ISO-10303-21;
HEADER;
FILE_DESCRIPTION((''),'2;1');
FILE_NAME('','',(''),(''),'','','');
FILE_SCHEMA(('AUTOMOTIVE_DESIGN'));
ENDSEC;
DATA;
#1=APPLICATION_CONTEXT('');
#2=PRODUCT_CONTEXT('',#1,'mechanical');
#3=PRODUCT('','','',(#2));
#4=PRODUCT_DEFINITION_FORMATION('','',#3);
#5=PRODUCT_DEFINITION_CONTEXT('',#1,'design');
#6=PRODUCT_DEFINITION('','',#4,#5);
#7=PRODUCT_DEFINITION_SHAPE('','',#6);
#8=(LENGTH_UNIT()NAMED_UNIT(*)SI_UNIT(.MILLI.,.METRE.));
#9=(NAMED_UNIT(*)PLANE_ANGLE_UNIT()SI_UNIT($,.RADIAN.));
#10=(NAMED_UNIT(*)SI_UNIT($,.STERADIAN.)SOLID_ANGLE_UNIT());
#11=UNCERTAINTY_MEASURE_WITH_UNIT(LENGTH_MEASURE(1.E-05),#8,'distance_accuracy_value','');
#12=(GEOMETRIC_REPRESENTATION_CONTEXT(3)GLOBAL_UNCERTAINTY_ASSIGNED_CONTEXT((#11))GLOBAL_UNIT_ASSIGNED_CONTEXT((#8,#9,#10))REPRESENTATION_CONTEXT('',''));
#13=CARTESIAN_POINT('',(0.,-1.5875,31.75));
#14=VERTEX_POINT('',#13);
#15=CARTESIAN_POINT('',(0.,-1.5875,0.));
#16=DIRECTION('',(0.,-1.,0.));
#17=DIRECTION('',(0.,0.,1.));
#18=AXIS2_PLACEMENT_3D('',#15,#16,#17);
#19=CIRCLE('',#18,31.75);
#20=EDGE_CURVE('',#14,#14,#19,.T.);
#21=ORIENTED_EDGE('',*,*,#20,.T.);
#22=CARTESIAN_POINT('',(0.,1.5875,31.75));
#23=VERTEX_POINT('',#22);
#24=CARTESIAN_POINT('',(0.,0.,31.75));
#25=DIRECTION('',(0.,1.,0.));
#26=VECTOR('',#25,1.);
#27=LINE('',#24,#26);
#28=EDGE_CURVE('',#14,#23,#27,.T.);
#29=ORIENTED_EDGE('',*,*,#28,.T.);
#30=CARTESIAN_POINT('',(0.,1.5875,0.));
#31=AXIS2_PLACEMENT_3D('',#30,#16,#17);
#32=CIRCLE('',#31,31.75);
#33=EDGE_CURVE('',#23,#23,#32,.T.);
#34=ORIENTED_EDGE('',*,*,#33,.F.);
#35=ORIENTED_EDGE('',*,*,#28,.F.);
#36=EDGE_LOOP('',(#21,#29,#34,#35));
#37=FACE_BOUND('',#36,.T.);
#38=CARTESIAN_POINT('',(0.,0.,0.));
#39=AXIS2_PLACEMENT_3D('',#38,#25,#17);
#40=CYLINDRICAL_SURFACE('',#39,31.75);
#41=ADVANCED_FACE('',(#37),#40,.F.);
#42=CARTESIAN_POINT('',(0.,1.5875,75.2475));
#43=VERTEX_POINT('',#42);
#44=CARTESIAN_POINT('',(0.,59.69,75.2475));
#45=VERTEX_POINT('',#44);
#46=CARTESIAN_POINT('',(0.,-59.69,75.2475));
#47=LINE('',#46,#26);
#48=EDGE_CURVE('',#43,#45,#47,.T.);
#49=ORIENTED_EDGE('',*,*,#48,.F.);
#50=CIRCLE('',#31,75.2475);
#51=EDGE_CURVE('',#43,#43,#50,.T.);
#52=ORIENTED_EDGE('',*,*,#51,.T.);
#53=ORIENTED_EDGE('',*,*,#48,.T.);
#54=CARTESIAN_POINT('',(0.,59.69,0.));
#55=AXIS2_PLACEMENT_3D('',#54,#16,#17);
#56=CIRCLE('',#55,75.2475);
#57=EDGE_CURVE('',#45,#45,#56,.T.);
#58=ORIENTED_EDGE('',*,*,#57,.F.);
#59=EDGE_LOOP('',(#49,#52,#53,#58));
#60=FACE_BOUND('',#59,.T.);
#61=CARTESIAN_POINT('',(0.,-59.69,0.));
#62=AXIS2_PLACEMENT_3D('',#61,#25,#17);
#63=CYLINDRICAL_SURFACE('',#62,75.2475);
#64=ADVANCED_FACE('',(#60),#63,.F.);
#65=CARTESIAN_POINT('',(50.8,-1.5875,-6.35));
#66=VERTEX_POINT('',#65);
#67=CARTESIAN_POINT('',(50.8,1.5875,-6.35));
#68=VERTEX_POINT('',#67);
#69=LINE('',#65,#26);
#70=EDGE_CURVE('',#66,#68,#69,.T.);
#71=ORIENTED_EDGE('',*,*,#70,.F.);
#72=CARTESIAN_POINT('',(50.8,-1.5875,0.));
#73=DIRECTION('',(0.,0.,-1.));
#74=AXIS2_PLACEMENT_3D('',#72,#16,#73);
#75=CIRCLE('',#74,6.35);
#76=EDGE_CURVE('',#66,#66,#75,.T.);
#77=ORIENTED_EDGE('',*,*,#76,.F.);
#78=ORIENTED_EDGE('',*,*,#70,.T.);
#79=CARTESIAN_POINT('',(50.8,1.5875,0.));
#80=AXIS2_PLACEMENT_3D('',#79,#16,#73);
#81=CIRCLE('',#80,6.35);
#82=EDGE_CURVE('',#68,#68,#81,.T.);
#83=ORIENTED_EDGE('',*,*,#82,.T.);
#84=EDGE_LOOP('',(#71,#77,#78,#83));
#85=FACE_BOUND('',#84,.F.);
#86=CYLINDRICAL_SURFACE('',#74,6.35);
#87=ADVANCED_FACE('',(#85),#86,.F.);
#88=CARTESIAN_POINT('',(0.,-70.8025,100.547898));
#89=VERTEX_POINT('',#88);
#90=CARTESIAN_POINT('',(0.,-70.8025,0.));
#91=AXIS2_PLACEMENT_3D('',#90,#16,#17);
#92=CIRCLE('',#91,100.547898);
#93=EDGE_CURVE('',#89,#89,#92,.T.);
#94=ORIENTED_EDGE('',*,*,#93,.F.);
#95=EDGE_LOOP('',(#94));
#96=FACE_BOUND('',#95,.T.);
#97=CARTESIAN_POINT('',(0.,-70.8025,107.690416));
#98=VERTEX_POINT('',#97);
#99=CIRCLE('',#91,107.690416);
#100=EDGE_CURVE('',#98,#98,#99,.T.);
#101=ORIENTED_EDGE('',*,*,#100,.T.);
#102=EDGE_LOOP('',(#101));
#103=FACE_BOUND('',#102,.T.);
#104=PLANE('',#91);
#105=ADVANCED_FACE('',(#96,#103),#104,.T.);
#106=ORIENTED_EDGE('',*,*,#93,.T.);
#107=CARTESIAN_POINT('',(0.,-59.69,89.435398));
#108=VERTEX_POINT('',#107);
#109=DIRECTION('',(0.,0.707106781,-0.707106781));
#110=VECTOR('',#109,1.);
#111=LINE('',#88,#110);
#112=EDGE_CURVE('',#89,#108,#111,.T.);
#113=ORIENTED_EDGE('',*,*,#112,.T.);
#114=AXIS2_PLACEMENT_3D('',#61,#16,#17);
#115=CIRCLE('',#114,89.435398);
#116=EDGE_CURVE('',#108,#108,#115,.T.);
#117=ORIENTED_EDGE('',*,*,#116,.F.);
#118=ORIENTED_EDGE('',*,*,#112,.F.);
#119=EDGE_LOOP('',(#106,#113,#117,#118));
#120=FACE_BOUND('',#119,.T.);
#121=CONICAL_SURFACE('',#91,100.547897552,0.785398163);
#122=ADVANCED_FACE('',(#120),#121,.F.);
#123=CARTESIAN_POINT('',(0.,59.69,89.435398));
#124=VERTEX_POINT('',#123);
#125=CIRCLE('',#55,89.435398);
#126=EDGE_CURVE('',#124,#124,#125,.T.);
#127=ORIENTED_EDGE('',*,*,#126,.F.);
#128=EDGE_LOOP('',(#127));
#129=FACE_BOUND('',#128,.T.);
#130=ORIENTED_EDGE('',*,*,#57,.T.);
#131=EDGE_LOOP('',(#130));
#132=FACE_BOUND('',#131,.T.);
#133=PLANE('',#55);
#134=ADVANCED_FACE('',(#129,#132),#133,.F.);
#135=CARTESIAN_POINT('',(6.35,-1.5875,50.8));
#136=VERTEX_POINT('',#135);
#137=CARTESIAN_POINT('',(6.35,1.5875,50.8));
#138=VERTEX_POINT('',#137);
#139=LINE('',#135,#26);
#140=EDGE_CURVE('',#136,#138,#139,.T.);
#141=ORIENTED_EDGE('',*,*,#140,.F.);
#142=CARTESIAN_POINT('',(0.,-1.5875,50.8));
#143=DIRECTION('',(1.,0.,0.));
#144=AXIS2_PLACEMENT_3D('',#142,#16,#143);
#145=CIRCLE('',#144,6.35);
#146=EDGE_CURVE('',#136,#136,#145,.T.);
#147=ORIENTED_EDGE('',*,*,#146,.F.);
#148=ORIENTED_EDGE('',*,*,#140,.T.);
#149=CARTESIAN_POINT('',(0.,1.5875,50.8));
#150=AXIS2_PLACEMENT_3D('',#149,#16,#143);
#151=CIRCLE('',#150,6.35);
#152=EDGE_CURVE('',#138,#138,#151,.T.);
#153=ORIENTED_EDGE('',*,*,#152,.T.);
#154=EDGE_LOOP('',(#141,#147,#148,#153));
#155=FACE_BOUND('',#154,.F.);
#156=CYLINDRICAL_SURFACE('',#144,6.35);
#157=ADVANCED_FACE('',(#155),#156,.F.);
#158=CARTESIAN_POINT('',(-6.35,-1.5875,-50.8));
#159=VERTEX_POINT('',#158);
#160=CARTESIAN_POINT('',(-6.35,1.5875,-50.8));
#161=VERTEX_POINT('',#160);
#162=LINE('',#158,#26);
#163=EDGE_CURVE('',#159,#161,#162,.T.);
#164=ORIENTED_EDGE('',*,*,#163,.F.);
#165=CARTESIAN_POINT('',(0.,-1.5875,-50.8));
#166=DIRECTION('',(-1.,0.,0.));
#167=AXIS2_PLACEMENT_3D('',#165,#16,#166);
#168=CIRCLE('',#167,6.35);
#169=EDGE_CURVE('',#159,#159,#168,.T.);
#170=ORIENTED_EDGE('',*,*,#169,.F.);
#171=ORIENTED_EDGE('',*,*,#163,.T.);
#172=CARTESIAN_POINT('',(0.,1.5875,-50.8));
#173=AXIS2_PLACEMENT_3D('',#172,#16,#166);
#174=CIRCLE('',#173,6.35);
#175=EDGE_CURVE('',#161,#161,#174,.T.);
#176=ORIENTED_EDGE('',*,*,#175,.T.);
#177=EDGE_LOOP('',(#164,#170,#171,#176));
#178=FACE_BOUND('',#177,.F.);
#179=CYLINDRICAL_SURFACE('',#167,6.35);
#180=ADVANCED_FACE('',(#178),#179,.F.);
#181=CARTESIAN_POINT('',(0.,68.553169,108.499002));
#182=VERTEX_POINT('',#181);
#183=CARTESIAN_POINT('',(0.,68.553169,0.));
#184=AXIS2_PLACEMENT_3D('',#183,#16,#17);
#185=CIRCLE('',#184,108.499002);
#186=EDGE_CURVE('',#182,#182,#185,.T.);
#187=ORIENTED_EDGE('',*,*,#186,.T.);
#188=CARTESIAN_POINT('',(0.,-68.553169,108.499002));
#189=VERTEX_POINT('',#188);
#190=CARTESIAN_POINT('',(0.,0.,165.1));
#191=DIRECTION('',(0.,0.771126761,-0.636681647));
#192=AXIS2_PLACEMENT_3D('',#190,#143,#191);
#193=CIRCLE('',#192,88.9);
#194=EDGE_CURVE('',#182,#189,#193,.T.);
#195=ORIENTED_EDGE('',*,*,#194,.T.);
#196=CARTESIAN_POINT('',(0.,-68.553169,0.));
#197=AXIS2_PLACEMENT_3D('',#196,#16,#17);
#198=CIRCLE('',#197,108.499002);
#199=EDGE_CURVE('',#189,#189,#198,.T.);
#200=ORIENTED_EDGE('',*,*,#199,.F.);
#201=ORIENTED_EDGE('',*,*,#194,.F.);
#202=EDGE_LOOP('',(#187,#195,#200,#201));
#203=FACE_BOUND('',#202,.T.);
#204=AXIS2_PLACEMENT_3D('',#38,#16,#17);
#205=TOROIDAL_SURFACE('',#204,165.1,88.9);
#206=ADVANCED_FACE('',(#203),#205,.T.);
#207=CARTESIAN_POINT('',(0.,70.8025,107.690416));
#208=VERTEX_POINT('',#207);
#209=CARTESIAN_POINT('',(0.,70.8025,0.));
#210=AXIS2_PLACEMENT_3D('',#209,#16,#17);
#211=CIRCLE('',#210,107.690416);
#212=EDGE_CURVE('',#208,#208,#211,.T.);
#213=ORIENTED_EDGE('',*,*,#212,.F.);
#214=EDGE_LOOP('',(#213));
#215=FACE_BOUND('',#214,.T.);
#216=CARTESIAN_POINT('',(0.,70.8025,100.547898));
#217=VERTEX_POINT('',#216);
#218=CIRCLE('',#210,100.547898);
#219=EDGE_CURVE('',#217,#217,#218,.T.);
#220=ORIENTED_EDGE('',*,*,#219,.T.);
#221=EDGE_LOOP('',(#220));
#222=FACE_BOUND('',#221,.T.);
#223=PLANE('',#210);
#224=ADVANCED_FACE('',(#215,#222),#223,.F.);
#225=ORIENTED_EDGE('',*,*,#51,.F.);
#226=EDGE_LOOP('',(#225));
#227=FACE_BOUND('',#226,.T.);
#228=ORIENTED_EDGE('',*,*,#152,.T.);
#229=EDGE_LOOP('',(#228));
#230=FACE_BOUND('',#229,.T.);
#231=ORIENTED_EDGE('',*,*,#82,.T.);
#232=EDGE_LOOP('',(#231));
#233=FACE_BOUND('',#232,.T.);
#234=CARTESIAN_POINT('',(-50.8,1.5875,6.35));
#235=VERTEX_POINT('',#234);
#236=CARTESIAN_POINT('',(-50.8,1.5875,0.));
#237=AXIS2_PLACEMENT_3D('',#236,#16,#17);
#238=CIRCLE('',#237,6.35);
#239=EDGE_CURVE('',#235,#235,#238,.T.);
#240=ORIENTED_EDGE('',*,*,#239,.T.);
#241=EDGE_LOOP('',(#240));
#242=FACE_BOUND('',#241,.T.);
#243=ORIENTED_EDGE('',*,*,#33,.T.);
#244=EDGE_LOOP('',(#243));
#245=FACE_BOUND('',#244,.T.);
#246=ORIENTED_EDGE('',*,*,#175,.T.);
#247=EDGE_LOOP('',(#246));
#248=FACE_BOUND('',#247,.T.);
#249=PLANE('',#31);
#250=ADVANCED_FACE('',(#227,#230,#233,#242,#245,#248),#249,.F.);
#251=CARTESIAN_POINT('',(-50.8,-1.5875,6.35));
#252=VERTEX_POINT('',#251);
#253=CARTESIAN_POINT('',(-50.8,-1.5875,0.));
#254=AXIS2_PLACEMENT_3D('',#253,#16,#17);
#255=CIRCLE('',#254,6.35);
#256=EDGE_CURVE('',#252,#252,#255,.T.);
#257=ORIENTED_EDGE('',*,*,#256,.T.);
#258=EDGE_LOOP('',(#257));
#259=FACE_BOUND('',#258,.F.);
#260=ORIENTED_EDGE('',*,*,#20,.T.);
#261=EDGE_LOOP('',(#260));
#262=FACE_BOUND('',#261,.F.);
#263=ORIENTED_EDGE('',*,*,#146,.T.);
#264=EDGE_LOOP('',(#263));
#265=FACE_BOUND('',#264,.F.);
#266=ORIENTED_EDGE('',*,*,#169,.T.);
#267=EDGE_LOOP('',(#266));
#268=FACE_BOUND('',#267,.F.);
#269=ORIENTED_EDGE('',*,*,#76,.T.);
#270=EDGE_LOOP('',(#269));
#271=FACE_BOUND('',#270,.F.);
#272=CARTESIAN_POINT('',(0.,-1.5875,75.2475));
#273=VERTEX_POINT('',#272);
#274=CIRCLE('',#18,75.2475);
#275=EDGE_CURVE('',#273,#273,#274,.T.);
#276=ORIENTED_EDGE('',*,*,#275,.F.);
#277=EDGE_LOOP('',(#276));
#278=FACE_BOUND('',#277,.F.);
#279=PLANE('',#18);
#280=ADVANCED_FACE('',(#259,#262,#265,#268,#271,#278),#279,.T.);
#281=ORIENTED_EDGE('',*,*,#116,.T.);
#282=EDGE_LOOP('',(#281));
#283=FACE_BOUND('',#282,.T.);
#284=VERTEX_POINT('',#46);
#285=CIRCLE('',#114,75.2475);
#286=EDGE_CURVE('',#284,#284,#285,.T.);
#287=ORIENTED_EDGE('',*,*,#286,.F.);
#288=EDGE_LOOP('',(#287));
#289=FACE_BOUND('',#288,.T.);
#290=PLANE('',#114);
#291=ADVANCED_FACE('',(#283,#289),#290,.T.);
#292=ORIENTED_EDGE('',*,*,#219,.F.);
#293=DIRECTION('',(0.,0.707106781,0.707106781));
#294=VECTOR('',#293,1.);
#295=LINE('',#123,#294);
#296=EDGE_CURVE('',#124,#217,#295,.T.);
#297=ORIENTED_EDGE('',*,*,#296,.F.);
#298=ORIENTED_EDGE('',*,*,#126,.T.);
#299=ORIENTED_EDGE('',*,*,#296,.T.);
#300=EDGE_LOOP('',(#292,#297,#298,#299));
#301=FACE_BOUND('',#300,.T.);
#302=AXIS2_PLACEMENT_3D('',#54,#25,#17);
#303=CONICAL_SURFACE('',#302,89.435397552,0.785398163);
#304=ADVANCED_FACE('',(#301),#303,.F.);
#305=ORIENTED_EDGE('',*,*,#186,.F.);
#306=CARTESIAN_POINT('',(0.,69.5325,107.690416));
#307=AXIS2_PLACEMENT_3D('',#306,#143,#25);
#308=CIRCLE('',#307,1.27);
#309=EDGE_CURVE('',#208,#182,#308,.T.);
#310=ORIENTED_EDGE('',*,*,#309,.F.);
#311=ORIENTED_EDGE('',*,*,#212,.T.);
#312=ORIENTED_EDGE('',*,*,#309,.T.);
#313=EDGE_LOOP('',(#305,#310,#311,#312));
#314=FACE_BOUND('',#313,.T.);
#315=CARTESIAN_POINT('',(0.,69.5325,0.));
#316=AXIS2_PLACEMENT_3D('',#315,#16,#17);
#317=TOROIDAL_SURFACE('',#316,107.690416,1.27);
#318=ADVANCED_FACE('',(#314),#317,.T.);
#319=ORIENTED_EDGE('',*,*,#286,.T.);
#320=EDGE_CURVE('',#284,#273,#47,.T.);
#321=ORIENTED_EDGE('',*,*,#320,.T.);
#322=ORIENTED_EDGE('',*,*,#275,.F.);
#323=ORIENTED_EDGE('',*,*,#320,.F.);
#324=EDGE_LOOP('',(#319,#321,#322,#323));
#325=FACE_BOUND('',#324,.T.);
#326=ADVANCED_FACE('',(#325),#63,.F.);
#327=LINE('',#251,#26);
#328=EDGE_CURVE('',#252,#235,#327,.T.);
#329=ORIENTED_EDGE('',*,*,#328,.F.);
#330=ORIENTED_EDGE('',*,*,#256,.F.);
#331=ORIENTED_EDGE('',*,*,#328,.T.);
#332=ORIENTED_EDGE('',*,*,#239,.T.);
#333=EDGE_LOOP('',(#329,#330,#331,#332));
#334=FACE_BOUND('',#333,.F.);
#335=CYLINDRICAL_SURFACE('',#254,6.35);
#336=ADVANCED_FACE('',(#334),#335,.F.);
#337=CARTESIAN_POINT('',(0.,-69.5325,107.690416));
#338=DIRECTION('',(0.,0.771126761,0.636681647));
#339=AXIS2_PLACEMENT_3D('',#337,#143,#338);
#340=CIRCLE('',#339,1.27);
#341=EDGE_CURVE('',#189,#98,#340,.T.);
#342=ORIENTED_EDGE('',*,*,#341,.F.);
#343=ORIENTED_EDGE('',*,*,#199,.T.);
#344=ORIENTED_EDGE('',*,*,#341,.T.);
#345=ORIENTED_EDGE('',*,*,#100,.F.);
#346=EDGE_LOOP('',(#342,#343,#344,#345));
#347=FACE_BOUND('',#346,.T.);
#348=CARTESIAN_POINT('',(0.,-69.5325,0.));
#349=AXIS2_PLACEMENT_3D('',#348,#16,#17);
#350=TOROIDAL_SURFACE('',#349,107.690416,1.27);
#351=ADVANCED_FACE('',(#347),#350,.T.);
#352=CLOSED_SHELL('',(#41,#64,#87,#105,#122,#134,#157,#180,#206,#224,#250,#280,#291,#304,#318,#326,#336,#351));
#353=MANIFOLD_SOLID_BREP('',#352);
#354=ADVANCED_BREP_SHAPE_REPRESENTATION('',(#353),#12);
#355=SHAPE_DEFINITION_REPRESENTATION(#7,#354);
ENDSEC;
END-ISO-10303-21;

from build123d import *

# Parameters (mm, degrees)
F0_W            = 3.175
F0_H            = 43.4975
F2_R            = 6.35
F3_DEPTH        = 90.4885001
F3_COPIES_COUNT = 4


# Not quite as in the source:
# - a pattern or mirror of a feature is missing from the dataset's text; its kind, count and spacing are read off the source's solid


with BuildPart() as f1:
    # F0 (on Right) → F1 (revolve)
    with BuildSketch(Plane.YZ):
        with BuildLine():
            ThreePointArc((68.2625, 107.6904159243), (68.3373744099, 108.1200376462), (68.5531690141, 108.4990016155))
            ThreePointArc((68.5531690141, 108.4990016155), (0, 254), (-68.5531690141, 108.4990016155))
            ThreePointArc((-68.5531690141, 108.4990016155), (-68.3373744099, 108.1200376462), (-68.2625, 107.6904159243))
            Line((-68.2625, 107.6904159243), (-68.2625, 101.6))
            Line((-68.2625, 101.6), (-57.15, 90.4875))
            Line((-57.15, 90.4875), (-57.15, 77.7875))
            Line((-57.15, 77.7875), (57.15, 77.7875))
            Line((57.15, 77.7875), (57.15, 90.4875))
            Line((57.15, 90.4875), (68.2625, 101.6))
            Line((68.2625, 101.6), (68.2625, 107.6904159243))
        make_face()
        with BuildLine():
            ThreePointArc((70.8025, 107.6904159243), (69.9621217219, 108.8855415143), (68.5531690141, 108.4990016155))
            ThreePointArc((68.5531690141, 108.4990016155), (68.3373744099, 108.1200376462), (68.2625, 107.6904159243))
            Line((68.2625, 107.6904159243), (68.2625, 101.6))
            Line((68.2625, 101.6), (57.15, 90.4875))
            Line((57.15, 90.4875), (57.15, 77.7875))
            Line((57.15, 77.7875), (-57.15, 77.7875))
            Line((-57.15, 77.7875), (-57.15, 90.4875))
            Line((-57.15, 90.4875), (-68.2625, 101.6))
            Line((-68.2625, 101.6), (-68.2625, 107.6904159243))
            ThreePointArc((-68.2625, 107.6904159243), (-68.3373744099, 108.1200376462), (-68.5531690141, 108.4990016155))
            ThreePointArc((-68.5531690141, 108.4990016155), (-69.9621217219, 108.8855415143), (-70.8025, 107.6904159243))
            Line((-70.8025, 107.6904159243), (-70.8025, 100.5478975516))
            Line((-70.8025, 100.5478975516), (-59.69, 89.4353975516))
            Line((-59.69, 89.4353975516), (-59.69, 75.2475))
            Line((-59.69, 75.2475), (-1.5875, 75.2475))
            Line((-1.5875, 75.2475), (1.5875, 75.2475))
            Line((1.5875, 75.2475), (59.69, 75.2475))
            Line((59.69, 75.2475), (59.69, 89.4353975516))
            Line((59.69, 89.4353975516), (70.8025, 100.5478975516))
            Line((70.8025, 100.5478975516), (70.8025, 107.6904159243))
        make_face()
        with Locations((0, 53.49875)):
            Rectangle(F0_W, F0_H)
    revolve(axis=Axis((0, -101.5489548445, 0), (0, -1, 0)))

    # F2 (on face) → F3 (cut, through all)
    with BuildSketch(Plane.XZ.offset(1.5875)):
        with Locations((0, 50.8)):
            Circle(F2_R)
    f3 = extrude(amount=-F3_DEPTH, mode=Mode.SUBTRACT)

    # F3_copies: F3 ×4 about axis
    f3_copies_axis = Axis((0, 0, 0), (0, 1, 0))
    for i in range(1, F3_COPIES_COUNT):
        add(f3.rotate(f3_copies_axis, i * 360 / F3_COPIES_COUNT), mode=Mode.SUBTRACT)


solid = f1.part
